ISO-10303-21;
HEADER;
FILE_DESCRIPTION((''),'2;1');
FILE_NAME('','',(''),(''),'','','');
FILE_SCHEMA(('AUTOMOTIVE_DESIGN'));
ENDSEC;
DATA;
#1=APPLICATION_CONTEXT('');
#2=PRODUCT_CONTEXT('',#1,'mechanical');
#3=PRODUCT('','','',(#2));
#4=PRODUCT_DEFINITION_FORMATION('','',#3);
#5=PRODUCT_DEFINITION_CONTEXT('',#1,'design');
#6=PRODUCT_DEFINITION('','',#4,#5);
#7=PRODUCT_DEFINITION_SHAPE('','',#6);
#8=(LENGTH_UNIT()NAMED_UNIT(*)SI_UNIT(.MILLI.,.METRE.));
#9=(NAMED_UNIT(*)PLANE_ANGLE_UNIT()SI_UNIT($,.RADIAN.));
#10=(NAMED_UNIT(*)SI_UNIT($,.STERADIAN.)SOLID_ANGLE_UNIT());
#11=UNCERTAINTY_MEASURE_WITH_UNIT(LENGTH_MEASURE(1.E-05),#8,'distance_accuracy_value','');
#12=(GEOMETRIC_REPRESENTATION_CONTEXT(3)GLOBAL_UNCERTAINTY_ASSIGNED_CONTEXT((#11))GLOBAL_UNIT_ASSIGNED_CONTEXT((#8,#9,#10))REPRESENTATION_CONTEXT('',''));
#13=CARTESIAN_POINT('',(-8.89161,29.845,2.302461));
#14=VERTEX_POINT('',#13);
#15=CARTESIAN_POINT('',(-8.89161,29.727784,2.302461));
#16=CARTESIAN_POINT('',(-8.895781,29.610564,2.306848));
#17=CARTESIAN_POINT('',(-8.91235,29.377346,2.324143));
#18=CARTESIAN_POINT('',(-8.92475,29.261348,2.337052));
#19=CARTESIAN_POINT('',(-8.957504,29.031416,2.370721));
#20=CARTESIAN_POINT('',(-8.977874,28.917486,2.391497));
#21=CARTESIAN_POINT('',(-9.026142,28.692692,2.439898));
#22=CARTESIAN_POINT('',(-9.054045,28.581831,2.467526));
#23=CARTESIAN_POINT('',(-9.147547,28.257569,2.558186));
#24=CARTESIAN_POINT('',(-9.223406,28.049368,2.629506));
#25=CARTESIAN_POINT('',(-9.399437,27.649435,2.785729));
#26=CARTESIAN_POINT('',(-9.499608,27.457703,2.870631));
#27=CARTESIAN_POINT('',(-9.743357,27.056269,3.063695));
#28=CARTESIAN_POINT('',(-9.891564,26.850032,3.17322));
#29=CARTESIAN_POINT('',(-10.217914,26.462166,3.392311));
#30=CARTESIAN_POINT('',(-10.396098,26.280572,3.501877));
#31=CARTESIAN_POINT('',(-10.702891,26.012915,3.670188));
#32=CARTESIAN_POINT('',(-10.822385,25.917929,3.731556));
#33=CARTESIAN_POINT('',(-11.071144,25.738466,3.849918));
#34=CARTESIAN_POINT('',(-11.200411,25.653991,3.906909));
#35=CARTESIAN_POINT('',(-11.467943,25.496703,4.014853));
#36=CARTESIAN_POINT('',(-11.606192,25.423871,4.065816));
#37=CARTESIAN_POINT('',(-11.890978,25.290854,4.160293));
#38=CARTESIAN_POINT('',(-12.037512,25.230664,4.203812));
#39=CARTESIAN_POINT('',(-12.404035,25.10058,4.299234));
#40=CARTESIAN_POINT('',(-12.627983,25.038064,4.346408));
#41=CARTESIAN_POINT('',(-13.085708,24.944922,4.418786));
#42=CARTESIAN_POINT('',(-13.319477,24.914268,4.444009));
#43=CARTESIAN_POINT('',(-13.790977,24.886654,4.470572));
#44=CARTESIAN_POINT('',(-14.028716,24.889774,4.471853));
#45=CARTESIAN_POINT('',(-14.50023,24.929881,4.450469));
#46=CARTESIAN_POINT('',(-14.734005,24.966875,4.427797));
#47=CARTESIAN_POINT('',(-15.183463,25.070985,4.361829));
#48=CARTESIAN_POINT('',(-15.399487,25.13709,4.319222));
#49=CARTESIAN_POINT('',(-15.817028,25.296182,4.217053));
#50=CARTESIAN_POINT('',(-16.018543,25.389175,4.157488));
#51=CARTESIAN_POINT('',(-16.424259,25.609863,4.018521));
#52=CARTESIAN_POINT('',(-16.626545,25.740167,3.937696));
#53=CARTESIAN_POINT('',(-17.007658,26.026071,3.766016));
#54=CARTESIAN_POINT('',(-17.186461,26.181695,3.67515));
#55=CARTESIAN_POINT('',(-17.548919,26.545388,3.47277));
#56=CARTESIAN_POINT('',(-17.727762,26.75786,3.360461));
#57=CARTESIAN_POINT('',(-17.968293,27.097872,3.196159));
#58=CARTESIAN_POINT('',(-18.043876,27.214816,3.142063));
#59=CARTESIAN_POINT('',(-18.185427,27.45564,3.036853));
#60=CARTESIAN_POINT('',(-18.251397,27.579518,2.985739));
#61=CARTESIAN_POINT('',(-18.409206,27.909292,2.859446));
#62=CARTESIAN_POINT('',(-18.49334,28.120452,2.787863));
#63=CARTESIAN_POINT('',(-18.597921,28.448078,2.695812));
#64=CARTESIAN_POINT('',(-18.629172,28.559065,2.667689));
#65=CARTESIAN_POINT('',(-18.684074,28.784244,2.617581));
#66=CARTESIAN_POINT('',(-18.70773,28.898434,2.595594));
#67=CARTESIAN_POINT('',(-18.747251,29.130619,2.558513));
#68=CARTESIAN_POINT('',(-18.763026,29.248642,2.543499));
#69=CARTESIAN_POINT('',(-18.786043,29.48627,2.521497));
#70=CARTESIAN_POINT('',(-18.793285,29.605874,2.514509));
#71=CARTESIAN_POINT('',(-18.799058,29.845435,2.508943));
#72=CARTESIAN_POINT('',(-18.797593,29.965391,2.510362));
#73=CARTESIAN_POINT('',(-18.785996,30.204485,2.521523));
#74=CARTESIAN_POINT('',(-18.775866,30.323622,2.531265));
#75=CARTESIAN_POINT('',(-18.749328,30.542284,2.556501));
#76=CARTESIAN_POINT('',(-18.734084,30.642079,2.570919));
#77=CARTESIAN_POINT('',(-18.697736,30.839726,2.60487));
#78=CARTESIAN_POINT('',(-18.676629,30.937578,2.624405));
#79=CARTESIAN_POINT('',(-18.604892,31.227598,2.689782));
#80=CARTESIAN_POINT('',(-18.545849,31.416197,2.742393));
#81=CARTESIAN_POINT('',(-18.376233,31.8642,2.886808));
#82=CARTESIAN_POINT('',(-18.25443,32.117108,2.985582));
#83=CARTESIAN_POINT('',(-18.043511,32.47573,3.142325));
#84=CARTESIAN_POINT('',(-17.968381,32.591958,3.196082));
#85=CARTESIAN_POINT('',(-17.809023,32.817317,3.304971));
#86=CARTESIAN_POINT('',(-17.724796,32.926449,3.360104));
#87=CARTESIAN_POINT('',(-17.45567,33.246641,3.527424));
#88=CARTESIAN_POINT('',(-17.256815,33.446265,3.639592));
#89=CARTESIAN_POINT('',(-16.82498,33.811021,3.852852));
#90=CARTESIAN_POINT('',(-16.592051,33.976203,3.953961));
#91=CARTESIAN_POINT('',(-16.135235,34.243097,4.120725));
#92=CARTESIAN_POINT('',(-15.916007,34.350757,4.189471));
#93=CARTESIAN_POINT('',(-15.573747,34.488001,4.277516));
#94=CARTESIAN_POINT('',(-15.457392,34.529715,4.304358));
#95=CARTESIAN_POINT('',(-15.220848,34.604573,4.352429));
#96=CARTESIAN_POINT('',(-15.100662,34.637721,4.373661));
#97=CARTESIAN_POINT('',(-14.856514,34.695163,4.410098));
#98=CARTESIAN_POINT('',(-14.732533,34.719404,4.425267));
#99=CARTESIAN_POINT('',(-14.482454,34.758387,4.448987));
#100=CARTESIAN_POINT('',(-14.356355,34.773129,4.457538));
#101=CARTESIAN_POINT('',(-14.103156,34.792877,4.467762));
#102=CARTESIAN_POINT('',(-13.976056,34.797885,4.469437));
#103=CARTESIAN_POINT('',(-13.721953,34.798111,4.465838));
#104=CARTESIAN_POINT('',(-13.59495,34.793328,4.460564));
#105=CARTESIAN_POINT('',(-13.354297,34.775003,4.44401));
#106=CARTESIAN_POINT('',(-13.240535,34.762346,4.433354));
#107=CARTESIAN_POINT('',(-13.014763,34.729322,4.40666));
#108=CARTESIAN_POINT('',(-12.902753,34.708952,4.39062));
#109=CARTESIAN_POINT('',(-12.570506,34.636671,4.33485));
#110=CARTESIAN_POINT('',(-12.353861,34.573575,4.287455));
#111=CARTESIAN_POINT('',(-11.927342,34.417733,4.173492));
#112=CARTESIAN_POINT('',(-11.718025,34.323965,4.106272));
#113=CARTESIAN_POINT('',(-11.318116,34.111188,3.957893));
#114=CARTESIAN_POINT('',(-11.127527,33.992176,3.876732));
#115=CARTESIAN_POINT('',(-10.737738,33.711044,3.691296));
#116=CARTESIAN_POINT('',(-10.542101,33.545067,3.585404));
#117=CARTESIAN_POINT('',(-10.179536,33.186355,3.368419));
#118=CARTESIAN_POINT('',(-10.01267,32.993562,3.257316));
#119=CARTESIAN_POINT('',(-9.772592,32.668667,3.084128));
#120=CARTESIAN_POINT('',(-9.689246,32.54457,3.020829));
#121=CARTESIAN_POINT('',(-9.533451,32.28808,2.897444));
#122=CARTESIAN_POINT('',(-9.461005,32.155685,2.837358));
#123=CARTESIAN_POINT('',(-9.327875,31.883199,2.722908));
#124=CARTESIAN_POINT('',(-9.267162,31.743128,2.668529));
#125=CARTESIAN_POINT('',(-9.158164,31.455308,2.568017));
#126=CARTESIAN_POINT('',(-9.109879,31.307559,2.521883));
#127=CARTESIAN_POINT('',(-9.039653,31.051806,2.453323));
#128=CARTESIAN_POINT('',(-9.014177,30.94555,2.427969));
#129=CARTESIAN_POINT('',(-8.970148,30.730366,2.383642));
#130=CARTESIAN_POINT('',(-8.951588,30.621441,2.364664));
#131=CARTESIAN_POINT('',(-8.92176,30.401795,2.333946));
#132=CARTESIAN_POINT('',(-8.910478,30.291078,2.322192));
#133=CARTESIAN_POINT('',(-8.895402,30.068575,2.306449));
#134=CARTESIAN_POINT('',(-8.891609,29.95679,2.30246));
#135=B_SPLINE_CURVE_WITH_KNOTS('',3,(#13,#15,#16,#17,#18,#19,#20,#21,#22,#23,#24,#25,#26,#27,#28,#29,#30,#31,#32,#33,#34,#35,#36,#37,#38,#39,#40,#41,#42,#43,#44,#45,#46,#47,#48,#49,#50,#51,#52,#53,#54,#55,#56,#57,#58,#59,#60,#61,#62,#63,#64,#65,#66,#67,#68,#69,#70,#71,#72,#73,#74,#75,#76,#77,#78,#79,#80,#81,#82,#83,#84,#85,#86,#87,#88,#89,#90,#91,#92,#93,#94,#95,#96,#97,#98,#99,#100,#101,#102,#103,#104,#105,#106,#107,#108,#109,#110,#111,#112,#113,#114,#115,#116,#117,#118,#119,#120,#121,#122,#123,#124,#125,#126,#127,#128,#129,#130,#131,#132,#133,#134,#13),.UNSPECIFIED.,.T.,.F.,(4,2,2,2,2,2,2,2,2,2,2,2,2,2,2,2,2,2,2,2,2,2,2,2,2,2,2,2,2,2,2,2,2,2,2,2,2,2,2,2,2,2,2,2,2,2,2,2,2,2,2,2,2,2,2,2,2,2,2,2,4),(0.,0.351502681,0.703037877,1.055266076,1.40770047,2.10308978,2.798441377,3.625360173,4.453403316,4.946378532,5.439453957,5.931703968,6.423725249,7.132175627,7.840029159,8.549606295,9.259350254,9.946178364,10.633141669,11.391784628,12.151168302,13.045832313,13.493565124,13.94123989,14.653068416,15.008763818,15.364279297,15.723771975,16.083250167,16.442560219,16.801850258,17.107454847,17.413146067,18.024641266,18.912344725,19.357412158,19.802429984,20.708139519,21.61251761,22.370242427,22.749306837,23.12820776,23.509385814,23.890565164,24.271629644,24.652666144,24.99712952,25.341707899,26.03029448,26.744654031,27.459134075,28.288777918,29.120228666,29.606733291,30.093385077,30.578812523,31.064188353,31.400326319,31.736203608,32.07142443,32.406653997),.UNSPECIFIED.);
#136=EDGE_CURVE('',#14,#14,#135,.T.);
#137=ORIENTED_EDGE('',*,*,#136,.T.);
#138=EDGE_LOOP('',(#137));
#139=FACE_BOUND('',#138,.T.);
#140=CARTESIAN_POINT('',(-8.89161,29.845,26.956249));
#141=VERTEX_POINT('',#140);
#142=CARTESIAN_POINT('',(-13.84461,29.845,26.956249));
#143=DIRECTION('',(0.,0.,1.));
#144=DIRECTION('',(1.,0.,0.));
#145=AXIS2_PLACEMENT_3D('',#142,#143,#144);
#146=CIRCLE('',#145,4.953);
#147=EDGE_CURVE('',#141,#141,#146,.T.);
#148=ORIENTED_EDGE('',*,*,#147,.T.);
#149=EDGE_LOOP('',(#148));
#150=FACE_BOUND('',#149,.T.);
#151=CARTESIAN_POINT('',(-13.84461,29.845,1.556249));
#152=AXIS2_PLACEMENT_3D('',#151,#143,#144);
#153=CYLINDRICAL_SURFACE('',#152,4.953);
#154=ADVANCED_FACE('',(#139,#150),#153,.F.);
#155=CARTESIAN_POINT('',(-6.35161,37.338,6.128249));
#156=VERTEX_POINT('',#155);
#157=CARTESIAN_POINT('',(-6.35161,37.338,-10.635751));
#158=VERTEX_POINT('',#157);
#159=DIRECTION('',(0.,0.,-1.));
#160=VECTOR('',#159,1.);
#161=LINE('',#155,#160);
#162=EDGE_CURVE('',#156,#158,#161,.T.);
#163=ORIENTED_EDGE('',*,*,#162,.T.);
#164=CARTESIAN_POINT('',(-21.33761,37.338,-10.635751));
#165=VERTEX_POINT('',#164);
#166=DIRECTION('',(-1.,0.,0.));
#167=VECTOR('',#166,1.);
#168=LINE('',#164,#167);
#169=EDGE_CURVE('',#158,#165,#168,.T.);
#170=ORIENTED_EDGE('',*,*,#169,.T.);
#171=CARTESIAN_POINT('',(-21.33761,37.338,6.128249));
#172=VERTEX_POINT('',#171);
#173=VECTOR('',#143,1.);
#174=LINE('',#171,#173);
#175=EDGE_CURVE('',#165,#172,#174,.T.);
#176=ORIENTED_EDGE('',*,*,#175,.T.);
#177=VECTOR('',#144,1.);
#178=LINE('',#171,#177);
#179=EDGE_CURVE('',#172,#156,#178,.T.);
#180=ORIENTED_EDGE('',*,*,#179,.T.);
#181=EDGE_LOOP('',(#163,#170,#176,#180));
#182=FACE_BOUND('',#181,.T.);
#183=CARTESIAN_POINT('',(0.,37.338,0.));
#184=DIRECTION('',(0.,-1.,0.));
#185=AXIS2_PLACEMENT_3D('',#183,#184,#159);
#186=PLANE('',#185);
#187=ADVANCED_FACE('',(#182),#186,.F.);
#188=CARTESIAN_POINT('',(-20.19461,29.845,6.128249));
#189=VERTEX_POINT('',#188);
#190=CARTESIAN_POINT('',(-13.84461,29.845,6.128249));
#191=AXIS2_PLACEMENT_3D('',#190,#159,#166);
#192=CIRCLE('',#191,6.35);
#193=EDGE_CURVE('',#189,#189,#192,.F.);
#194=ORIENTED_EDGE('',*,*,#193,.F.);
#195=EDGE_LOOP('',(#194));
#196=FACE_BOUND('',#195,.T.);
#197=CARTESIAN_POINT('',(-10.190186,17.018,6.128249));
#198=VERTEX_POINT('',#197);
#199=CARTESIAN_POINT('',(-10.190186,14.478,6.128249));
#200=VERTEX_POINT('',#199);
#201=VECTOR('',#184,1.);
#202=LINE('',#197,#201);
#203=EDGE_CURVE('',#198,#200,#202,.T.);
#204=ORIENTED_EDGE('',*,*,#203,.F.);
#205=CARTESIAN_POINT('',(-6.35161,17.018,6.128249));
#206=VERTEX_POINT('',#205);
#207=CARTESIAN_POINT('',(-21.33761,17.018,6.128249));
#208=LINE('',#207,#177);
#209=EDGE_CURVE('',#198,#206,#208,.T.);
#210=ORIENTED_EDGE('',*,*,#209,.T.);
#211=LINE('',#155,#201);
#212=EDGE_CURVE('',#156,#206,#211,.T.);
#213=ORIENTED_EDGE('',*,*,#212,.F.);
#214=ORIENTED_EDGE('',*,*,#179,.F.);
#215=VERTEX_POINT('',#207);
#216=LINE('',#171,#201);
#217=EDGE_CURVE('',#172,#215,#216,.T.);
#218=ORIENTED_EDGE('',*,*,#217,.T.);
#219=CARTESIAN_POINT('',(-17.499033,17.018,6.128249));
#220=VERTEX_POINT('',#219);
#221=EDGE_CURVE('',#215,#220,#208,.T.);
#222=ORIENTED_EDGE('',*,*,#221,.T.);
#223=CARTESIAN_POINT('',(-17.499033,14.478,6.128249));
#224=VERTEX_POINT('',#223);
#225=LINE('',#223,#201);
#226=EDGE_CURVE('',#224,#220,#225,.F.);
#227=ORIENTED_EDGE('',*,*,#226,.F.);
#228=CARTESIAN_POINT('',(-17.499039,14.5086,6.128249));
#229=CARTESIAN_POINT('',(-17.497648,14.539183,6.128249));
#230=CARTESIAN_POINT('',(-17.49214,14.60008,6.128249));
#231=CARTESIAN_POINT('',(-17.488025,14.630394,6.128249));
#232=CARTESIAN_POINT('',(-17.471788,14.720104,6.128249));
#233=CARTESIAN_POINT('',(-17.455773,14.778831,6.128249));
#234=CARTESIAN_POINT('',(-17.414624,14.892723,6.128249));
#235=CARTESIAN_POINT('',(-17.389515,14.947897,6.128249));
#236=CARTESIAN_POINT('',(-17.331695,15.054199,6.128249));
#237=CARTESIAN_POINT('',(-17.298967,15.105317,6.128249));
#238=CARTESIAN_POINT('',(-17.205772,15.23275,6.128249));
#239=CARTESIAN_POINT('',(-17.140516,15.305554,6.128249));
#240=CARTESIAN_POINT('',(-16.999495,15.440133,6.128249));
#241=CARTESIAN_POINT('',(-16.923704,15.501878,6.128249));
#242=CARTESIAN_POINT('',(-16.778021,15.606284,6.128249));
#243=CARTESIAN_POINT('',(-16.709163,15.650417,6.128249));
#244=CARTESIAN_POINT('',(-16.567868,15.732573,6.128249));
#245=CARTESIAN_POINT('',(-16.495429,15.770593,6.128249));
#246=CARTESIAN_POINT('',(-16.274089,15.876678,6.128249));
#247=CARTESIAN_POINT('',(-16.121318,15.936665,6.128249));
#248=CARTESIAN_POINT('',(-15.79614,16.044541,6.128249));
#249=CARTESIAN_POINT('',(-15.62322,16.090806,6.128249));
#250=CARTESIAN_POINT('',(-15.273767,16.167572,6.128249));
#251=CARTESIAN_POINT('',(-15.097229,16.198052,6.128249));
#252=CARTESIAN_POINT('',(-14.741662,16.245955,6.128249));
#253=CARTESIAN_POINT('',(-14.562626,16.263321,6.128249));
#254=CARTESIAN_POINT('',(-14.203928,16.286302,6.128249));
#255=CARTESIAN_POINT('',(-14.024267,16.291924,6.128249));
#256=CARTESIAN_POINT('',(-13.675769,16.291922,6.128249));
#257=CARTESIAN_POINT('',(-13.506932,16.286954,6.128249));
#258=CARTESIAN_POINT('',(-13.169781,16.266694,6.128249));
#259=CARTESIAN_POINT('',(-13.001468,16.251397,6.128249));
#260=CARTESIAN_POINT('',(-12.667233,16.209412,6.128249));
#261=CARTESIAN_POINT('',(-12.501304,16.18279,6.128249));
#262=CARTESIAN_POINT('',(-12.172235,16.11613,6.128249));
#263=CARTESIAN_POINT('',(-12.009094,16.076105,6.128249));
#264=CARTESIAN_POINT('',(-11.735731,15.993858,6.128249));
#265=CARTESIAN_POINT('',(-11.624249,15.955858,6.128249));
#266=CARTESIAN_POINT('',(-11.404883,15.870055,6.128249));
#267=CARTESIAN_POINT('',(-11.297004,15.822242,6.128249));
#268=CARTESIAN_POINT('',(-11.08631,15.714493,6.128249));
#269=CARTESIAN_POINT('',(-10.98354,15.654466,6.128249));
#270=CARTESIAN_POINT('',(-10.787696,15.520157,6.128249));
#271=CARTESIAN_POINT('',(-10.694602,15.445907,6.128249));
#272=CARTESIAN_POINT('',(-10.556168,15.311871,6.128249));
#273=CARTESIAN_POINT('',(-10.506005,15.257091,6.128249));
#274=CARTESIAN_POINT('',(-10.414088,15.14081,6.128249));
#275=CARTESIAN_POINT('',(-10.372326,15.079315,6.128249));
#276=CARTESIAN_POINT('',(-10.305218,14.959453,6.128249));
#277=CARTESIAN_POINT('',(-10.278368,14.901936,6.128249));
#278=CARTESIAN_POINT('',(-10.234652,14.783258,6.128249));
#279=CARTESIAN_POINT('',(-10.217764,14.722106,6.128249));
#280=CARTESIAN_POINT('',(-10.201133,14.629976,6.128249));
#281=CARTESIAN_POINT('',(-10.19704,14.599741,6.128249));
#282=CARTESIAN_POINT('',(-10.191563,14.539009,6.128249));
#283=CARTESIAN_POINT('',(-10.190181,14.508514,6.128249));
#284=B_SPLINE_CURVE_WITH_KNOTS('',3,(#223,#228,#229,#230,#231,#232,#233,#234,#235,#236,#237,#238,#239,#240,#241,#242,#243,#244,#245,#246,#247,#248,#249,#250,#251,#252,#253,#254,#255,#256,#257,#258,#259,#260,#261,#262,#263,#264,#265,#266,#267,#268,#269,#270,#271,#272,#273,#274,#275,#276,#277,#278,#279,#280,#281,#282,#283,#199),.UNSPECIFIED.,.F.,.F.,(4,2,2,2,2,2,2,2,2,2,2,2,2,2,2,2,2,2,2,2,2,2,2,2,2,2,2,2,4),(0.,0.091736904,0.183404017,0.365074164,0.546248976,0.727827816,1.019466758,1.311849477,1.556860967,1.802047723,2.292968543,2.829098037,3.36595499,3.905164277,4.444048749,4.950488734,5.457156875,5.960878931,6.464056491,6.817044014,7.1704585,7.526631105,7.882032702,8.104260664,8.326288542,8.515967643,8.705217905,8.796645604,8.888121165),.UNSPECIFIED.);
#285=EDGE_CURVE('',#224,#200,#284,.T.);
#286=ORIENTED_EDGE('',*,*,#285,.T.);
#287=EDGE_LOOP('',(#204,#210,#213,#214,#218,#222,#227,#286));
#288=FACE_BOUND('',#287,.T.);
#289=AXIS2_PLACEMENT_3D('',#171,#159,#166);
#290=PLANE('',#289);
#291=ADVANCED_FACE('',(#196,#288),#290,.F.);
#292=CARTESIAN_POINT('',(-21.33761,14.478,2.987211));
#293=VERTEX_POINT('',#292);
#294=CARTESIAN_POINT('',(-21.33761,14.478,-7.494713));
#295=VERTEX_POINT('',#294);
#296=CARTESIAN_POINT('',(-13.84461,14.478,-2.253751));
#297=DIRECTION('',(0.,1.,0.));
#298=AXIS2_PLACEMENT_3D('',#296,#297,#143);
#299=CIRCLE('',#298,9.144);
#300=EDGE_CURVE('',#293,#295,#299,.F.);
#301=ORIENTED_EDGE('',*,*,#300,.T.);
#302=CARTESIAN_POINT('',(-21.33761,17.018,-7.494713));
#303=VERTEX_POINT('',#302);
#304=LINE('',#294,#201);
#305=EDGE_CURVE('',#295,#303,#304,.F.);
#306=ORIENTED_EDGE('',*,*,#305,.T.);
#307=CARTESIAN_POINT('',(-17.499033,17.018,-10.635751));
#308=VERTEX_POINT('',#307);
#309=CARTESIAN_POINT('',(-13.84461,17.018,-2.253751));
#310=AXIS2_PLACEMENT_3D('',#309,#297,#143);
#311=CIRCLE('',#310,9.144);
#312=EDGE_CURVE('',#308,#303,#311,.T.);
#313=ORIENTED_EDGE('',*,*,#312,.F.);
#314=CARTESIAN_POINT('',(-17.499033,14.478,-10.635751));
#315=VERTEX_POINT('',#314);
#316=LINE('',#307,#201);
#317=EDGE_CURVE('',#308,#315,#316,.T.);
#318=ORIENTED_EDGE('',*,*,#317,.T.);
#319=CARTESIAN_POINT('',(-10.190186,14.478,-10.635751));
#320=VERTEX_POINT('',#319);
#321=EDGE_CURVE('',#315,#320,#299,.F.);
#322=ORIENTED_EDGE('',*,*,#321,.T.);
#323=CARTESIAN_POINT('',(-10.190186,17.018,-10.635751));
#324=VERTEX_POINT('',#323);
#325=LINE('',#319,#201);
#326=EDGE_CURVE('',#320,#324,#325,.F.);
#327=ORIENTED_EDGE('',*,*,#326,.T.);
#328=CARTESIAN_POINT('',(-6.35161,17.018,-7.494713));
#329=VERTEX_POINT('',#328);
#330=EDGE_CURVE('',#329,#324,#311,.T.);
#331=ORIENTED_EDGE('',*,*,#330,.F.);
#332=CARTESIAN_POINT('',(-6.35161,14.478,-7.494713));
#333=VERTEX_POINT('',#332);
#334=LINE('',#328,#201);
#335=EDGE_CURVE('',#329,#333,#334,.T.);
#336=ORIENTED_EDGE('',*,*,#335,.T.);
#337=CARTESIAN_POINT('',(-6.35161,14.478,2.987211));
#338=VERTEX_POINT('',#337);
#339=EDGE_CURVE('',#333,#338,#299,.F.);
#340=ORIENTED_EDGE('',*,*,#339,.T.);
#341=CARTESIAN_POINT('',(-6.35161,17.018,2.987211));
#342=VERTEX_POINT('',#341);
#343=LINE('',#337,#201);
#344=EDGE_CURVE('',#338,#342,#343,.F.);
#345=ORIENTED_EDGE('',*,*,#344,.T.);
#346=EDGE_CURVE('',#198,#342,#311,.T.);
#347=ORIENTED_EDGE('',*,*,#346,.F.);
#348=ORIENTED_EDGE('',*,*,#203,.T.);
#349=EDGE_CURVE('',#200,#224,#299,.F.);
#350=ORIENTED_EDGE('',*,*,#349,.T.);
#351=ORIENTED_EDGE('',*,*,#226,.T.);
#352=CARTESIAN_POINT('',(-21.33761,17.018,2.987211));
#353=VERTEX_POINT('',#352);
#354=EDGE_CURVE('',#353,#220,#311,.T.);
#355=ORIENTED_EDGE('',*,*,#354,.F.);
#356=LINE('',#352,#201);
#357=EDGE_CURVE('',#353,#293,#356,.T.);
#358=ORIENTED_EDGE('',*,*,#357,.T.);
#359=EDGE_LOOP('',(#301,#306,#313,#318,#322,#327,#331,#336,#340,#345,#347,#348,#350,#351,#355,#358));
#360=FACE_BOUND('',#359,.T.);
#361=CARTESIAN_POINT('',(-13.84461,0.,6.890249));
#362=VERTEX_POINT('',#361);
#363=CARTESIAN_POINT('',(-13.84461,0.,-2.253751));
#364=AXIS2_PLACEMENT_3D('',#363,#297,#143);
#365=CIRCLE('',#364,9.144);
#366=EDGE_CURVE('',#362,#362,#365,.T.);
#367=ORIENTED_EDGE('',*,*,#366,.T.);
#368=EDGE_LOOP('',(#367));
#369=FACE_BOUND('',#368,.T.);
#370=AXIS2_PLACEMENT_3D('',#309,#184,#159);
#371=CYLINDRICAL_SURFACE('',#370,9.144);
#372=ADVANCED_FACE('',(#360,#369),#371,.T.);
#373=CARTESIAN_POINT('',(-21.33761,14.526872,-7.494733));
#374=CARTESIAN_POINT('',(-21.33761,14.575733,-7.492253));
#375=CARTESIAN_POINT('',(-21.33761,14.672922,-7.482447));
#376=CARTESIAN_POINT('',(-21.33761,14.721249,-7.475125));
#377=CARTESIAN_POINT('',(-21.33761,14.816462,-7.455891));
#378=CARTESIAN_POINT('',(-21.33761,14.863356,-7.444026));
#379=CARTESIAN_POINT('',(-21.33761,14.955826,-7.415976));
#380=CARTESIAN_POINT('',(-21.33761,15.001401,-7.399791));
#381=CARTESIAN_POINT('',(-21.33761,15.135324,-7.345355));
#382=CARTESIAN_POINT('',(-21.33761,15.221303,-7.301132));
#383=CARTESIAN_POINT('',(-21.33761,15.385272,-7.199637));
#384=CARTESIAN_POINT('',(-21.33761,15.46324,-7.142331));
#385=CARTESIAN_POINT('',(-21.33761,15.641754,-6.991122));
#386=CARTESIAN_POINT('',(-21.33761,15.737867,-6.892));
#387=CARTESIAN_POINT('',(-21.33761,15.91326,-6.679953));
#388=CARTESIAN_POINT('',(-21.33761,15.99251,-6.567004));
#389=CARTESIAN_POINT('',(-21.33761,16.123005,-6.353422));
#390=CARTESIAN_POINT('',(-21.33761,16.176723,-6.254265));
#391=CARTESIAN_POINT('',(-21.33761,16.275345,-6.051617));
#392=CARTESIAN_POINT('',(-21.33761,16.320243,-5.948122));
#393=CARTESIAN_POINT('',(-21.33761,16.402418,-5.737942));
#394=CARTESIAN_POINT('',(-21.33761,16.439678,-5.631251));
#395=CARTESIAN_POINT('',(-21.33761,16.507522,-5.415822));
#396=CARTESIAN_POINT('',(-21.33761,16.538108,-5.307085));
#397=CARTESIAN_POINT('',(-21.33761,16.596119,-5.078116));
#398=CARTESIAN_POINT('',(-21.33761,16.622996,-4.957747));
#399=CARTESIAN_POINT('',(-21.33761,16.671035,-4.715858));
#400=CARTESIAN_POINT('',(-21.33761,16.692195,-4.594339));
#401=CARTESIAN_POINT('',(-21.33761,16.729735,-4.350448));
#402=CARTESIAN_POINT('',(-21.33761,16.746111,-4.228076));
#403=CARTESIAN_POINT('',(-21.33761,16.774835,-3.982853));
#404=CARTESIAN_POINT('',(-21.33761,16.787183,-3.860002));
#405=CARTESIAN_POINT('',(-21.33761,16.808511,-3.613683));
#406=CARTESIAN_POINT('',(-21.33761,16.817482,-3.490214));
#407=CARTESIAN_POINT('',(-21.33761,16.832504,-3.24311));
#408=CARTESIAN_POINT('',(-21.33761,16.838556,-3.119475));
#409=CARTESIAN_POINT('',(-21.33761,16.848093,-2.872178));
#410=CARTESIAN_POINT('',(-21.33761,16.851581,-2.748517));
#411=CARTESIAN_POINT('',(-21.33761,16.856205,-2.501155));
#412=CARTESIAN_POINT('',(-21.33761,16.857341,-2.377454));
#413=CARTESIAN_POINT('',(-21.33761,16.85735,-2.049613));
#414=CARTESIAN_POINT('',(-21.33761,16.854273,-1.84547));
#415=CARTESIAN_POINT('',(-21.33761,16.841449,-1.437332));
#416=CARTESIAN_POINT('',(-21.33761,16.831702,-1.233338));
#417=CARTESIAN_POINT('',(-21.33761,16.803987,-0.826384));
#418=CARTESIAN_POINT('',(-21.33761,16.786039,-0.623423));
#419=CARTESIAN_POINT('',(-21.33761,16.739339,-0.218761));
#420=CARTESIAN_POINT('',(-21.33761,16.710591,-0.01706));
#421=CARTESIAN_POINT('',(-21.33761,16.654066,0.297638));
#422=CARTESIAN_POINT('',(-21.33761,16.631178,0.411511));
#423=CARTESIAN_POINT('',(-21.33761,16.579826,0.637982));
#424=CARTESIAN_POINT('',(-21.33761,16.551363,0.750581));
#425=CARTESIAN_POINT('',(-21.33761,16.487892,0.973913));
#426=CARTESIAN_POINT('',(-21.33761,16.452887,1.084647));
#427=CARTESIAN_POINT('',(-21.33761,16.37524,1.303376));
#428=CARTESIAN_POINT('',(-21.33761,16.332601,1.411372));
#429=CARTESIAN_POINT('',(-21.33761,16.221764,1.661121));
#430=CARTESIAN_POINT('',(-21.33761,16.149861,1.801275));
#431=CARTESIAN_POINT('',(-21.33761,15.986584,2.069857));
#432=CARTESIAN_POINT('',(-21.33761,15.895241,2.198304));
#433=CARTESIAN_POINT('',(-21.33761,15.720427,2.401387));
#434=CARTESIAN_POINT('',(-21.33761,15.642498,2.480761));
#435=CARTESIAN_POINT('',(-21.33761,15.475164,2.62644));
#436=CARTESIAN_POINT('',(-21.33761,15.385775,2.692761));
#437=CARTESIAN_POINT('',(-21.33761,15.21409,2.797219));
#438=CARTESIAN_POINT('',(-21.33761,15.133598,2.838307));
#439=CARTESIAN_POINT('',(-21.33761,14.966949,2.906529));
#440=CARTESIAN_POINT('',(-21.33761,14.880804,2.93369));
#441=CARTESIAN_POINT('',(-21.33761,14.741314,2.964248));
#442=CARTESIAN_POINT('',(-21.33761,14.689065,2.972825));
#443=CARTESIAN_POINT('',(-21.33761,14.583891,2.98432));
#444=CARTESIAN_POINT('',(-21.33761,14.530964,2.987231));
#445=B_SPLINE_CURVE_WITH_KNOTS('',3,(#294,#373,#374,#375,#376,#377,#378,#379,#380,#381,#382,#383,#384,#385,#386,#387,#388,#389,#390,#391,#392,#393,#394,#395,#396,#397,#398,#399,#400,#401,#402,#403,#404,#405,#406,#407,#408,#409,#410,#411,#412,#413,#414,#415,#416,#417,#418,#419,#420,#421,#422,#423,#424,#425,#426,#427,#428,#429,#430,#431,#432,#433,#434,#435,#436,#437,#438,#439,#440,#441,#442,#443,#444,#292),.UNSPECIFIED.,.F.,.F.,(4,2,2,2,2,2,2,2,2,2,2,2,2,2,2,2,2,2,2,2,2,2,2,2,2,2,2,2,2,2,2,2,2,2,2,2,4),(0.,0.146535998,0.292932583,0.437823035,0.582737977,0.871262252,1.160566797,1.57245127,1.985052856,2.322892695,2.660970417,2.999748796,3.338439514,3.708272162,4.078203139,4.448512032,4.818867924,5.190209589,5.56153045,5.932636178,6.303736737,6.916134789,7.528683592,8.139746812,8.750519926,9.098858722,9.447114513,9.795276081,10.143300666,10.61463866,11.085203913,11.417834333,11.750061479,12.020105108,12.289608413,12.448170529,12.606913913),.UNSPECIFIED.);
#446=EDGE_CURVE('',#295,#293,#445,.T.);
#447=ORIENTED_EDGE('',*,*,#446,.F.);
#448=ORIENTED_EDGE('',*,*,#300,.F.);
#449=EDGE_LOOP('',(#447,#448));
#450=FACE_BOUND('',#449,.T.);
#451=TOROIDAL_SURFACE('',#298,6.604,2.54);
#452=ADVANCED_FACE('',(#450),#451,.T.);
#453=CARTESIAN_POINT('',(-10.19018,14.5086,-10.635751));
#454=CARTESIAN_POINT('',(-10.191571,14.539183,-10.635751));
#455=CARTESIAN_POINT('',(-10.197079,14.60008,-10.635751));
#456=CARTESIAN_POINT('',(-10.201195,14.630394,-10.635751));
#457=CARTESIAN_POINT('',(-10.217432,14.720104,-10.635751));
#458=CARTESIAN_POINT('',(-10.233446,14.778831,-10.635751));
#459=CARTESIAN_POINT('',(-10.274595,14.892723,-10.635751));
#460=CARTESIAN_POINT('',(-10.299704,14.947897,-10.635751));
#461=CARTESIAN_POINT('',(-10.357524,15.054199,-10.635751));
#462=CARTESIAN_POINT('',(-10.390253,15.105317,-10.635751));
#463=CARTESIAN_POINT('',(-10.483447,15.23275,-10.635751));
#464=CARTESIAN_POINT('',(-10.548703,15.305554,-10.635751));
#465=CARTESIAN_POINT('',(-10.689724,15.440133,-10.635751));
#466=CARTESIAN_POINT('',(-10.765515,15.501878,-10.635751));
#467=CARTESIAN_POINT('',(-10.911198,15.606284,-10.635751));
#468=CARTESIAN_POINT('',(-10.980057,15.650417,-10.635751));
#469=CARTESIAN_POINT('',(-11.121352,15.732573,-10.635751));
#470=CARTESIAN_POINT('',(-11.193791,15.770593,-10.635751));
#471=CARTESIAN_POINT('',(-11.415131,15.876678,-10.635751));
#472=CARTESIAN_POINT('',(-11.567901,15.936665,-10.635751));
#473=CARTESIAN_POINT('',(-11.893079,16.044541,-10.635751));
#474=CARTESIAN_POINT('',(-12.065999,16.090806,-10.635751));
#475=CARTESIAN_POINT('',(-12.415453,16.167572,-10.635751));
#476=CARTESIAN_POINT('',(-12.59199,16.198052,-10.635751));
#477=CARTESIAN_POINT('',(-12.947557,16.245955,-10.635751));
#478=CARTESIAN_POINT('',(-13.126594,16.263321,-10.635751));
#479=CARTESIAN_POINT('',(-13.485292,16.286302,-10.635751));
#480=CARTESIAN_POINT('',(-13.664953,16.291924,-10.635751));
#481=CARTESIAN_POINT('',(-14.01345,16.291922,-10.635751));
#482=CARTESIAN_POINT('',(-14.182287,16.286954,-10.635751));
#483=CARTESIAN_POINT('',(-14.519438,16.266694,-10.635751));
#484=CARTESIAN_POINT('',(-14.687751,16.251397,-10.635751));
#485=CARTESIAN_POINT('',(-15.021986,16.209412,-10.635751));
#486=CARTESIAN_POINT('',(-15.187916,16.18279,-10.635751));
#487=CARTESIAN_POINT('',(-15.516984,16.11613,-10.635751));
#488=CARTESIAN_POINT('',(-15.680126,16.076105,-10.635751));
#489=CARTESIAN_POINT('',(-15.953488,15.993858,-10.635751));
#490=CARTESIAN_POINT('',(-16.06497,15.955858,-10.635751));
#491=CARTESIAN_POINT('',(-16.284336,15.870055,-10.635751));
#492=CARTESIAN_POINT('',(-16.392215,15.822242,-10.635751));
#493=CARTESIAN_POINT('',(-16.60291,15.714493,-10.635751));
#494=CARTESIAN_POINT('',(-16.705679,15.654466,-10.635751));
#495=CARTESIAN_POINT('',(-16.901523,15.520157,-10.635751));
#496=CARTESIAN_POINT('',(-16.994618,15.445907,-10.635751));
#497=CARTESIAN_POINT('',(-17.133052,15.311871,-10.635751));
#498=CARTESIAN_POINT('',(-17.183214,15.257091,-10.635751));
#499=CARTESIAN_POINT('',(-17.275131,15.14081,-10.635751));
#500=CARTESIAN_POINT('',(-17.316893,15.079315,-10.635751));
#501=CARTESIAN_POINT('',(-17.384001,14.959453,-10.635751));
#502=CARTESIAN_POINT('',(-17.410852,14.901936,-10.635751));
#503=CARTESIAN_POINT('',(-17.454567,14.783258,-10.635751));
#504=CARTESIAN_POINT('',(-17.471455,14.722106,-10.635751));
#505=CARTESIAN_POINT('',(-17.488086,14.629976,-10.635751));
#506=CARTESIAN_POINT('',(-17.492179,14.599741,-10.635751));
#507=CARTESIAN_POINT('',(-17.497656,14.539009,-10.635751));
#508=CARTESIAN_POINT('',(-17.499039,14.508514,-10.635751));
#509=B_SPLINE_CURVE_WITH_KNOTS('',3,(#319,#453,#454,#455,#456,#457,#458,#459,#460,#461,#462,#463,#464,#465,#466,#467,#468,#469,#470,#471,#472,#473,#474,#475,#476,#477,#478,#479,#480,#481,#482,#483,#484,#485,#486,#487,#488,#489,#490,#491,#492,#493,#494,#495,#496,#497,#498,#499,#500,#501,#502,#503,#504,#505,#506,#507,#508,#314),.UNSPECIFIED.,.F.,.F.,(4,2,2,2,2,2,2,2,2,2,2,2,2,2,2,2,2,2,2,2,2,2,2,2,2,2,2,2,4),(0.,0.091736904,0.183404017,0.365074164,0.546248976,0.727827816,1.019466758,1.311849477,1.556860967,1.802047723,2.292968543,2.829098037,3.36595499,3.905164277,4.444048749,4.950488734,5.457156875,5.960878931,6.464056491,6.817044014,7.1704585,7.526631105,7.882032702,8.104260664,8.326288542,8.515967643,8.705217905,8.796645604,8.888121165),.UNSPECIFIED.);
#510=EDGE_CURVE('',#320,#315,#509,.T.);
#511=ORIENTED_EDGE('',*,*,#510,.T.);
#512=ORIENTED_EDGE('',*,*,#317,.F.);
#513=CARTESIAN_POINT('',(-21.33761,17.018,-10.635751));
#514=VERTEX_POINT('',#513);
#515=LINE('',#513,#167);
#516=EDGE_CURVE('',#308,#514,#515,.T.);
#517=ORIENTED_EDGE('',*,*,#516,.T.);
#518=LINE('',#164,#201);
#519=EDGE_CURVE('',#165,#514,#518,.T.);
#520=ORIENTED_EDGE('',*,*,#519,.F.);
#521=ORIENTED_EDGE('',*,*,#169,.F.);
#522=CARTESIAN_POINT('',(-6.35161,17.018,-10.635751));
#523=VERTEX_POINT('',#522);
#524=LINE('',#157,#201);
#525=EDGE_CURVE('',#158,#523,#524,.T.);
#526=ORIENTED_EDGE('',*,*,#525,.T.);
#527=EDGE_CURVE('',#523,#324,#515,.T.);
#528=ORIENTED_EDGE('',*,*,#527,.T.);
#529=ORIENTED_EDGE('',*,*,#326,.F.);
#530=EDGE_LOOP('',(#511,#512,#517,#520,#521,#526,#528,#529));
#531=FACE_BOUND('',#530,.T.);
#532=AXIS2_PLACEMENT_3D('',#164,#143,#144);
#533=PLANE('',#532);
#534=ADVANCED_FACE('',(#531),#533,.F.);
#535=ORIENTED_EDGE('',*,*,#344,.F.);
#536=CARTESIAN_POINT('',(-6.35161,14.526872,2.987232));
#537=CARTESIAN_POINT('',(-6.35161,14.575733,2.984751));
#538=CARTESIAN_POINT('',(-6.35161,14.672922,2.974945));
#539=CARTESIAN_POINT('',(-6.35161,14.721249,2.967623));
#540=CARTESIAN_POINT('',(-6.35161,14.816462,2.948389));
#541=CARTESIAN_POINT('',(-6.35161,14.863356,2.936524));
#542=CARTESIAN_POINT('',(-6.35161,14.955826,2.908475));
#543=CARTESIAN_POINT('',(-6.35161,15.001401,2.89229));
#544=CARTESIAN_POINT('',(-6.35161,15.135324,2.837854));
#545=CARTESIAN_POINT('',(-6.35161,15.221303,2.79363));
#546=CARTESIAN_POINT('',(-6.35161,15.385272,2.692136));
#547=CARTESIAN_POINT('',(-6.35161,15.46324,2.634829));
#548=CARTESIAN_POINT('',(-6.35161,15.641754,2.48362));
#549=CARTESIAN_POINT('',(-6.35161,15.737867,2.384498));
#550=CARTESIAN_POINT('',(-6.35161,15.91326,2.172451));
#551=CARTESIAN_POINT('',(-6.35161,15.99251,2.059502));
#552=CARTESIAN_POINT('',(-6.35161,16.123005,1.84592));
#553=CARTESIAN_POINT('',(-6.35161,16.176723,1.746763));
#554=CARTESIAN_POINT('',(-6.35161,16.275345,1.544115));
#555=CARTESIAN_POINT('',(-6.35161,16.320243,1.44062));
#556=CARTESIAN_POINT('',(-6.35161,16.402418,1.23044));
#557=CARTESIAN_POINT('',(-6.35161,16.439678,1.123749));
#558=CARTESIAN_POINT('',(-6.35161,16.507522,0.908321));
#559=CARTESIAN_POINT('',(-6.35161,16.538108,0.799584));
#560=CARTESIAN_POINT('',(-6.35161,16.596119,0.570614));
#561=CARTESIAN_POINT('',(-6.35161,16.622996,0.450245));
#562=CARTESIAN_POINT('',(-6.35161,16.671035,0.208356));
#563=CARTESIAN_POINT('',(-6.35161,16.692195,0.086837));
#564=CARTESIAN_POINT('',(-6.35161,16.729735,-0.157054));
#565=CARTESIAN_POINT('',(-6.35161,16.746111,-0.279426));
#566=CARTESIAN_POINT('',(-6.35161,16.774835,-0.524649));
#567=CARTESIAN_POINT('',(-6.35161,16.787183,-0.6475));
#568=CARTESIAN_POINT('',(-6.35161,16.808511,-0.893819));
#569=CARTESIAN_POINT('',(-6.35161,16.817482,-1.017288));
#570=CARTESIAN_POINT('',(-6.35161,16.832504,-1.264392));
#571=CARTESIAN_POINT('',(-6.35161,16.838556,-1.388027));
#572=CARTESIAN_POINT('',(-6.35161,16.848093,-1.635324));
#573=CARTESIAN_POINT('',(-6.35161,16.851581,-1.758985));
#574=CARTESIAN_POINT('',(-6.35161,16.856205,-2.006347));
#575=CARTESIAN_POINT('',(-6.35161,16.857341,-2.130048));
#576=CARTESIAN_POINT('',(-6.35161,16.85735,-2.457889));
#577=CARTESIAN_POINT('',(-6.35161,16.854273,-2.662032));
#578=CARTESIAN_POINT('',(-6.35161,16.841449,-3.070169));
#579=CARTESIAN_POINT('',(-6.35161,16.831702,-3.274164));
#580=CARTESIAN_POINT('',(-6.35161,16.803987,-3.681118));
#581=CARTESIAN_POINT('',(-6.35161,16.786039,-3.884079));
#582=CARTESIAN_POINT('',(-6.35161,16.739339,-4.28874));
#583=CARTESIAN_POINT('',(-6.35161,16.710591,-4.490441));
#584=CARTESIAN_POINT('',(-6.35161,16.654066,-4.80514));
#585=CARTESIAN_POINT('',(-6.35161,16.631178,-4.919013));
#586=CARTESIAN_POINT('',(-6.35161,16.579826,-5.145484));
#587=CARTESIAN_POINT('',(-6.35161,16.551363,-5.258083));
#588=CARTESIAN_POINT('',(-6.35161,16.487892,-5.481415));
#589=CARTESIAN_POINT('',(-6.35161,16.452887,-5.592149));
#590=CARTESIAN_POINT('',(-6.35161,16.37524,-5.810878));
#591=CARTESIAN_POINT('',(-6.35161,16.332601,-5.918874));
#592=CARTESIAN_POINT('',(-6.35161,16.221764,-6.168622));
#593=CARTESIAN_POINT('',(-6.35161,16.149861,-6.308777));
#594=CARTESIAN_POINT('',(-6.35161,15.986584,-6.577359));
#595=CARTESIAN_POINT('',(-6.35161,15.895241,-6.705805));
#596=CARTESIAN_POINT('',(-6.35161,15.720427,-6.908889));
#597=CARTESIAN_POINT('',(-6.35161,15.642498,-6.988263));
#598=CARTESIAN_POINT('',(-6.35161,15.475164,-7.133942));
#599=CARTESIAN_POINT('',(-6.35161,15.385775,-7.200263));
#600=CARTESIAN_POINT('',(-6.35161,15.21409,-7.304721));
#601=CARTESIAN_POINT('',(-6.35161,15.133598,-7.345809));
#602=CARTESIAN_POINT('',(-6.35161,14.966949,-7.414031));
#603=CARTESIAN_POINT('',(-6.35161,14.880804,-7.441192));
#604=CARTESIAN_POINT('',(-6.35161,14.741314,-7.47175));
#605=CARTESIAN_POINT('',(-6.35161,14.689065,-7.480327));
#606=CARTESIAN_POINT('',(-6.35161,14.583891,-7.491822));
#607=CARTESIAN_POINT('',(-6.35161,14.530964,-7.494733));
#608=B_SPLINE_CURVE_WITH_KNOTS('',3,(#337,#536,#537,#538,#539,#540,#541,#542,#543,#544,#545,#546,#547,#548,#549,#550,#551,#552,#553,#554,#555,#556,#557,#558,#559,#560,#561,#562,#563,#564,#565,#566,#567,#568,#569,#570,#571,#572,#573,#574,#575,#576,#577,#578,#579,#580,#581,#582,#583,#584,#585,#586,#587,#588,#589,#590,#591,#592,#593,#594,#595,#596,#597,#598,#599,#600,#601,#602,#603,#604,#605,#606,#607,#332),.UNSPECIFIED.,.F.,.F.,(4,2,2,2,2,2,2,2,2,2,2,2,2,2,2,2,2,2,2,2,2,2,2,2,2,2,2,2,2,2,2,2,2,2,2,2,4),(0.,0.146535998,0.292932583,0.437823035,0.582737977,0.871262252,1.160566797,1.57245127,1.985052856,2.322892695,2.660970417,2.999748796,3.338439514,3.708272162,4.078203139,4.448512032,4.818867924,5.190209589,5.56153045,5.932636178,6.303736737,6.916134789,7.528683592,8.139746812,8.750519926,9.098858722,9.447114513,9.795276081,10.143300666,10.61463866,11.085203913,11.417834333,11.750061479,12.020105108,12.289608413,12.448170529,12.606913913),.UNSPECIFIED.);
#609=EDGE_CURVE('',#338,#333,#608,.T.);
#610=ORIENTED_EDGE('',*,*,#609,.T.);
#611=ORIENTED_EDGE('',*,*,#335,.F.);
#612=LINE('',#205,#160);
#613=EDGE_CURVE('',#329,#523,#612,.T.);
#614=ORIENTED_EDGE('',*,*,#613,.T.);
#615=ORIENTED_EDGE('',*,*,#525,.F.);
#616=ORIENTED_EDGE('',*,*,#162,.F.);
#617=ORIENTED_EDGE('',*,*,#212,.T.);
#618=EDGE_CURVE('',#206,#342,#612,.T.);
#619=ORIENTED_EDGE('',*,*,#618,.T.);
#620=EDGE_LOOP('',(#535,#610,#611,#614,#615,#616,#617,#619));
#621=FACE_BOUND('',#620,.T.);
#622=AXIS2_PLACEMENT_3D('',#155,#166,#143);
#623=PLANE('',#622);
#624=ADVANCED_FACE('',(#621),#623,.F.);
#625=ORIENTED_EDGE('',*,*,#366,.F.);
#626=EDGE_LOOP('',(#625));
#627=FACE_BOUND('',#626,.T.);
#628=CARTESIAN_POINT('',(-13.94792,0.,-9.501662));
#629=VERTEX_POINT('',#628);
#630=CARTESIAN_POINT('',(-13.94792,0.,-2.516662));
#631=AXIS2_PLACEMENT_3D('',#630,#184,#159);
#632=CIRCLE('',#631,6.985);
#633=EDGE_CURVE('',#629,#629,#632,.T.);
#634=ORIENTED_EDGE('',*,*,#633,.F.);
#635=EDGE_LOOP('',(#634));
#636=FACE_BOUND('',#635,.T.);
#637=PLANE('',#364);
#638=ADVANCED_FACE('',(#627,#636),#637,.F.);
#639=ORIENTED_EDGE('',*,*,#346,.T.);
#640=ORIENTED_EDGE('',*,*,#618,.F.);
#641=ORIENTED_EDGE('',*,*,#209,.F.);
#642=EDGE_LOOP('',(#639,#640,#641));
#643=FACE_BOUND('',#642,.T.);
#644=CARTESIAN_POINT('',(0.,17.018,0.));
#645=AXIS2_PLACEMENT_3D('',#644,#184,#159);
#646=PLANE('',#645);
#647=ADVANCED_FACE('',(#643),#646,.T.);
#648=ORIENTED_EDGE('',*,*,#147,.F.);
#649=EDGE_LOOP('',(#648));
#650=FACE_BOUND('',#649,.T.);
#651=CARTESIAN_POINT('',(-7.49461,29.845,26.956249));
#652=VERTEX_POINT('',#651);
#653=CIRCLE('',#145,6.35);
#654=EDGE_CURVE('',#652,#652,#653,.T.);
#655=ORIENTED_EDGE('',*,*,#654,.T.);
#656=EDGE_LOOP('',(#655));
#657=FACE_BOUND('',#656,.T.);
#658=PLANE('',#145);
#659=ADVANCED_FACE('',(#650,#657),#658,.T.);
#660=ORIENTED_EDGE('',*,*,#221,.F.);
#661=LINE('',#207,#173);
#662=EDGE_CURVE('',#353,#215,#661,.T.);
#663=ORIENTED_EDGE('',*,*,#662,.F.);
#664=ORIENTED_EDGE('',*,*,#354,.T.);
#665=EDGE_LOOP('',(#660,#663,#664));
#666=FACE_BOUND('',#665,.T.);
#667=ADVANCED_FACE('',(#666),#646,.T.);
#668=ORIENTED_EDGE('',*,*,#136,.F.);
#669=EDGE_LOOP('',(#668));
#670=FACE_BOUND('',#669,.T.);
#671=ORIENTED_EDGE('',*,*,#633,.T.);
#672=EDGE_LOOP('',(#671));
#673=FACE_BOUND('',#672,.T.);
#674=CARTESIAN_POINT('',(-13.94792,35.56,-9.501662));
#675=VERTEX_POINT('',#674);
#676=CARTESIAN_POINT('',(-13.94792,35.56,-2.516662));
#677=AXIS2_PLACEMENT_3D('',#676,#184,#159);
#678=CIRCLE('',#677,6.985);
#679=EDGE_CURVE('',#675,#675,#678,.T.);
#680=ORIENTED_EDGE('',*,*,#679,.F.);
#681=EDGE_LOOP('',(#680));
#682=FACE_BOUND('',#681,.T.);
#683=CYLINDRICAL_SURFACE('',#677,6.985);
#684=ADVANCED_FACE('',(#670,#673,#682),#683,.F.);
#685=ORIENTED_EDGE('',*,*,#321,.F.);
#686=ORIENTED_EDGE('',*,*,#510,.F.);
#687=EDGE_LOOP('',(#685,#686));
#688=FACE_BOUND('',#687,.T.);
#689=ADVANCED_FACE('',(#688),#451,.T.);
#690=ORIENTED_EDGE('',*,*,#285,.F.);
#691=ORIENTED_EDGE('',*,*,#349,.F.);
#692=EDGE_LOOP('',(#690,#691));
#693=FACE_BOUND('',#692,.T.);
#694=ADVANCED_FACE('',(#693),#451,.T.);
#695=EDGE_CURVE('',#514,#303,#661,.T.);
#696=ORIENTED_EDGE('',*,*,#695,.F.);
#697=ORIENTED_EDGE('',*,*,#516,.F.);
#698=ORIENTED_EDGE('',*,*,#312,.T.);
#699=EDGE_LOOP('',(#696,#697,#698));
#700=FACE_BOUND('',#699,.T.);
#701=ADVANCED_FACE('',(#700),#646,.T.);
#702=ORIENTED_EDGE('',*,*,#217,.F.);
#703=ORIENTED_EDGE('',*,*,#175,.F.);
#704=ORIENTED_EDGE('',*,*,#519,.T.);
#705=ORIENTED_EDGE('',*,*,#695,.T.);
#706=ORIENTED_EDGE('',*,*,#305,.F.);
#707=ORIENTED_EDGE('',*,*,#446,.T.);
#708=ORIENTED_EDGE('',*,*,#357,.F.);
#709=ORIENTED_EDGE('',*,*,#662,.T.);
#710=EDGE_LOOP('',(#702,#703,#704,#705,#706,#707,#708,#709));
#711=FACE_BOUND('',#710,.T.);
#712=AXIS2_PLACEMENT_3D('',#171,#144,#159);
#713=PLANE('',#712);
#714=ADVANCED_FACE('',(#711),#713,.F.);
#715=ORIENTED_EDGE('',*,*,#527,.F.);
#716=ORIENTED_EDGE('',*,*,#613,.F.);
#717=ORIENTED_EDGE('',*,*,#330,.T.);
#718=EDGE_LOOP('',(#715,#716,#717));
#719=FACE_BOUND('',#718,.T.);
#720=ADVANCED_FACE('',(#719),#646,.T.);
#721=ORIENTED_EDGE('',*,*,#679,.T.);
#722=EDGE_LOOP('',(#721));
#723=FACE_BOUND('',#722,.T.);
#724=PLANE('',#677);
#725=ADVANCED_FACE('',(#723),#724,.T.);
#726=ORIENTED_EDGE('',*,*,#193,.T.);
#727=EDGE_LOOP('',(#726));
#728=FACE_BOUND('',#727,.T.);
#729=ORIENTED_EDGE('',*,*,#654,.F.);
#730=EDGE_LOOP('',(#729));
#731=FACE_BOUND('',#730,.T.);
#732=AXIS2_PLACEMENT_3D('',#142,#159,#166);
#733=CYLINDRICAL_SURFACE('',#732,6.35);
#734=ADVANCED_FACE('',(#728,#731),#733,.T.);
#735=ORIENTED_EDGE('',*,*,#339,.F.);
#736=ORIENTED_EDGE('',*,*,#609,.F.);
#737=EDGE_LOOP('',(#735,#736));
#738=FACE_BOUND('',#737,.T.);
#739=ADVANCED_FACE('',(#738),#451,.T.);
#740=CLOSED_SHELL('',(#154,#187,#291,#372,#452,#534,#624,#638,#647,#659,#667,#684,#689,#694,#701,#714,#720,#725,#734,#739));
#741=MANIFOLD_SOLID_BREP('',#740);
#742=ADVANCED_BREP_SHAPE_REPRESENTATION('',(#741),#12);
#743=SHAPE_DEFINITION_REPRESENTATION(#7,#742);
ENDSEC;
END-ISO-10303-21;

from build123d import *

# Parameters (mm, degrees)
SKETCH1_R           = 9.144
BOSS_EXTRUDE1_DEPTH = 17.018
SKETCH2_W           = 14.986
SKETCH2_H           = 16.764
BOSS_EXTRUDE2_DEPTH = 20.32
SKETCH3_R           = 6.35
BOSS_EXTRUDE3_DEPTH = 20.828
SKETCH5_R           = 4.953
CUT_EXTRUDE1_DEPTH  = 25.4
SKETCH6_R           = 6.985
CUT_EXTRUDE2_DEPTH  = 35.56
FILLET3_R           = 2.54


with BuildPart() as part:
    # Sketch1 → Boss-Extrude1 (new body)
    with BuildSketch(Plane(origin=(0, 0, 0), x_dir=(1, 0, 0), z_dir=(0, 1, 0))):
        with Locations(Location((-13.844609685, 2.253750912, 0), (0, 0, 270))):
            Circle(SKETCH1_R)
    extrude(amount=BOSS_EXTRUDE1_DEPTH)

    # Sketch2 → Boss-Extrude2 (add)
    with BuildSketch(Plane(origin=(0, 17.018, 0), x_dir=(1, 0, 0), z_dir=(0, 1, 0))):
        with Locations((-13.844609685, 2.253750912)):
            Rectangle(SKETCH2_W, SKETCH2_H)
    extrude(amount=BOSS_EXTRUDE2_DEPTH)

    # Sketch3 → Boss-Extrude3 (add)
    with BuildSketch(Plane.XY.offset(6.128249088)):
        with Locations(Location((-13.844609685, 29.845, 0), (0, 0, 180))):
            Circle(SKETCH3_R)
    extrude(amount=BOSS_EXTRUDE3_DEPTH)

    # Sketch5 → Cut-Extrude1 (cut)
    with BuildSketch(Plane.XY.offset(26.956249088)):
        with Locations((-13.844609685, 29.845)):
            Circle(SKETCH5_R)
    extrude(amount=-CUT_EXTRUDE1_DEPTH, mode=Mode.SUBTRACT)

    # Sketch6 → Cut-Extrude2 (cut)
    with BuildSketch(Plane.XZ):
        with Locations(Location((-13.947920493, -2.516662253, 0), (0, 0, 270))):
            Circle(SKETCH6_R)
    extrude(amount=-CUT_EXTRUDE2_DEPTH, mode=Mode.SUBTRACT)

    # Fillet3
    # the kernel refuses this fillet: 2.54 mm, written as the material it takes off along each edge
    with BuildSketch(Plane(origin=(-13.844609685, 17.018, -2.253750912), x_dir=(-0.2627084277127984, 0, -0.9648752675909303), z_dir=(0.9648752675909303, 0, -0.2627084277127984))) as fillet3_piece_1_section:
        with BuildLine():
            CenterArc((9.144 - FILLET3_R, -FILLET3_R), FILLET3_R, 0, 90)
            Line((9.144 - FILLET3_R, 0), (9.144, 0))
            Line((9.144, 0), (9.144, -FILLET3_R))
        make_face()
    fillet3_piece_1 = revolve(axis=Axis((-13.844609685, 17.018, -2.253750912), (0, 1, 0)), revolution_arc=149.538336895, mode=Mode.PRIVATE)
    fillet3_piece_1 = split(fillet3_piece_1, bisect_by=Plane(origin=(-16.671949394, 16.123690595, -10.635750912), z_dir=(0, 0, -1)), keep=Keep.TOP, mode=Mode.PRIVATE)
    add(fillet3_piece_1, mode=Mode.SUBTRACT)
    with BuildSketch(Plane(origin=(-13.844609685, 17.018, -2.253750912), x_dir=(-0.2627084277127984, 0, -0.9648752675909303), z_dir=(0.9648752675909303, 0, -0.2627084277127984))) as fillet3_piece_2_section:
        with BuildLine():
            CenterArc((9.144 - FILLET3_R, -FILLET3_R), FILLET3_R, 0, 90)
            Line((9.144 - FILLET3_R, 0), (9.144, 0))
            Line((9.144, 0), (9.144, -FILLET3_R))
        make_face()
    fillet3_piece_2 = revolve(axis=Axis((-13.844609685, 17.018, -2.253750912), (0, 1, 0)), revolution_arc=149.538336895, mode=Mode.PRIVATE)
    fillet3_piece_2 = split(fillet3_piece_2, bisect_by=Plane(origin=(-16.671949372, 16.123690833, 6.128249088), z_dir=(0, 0, 1)), keep=Keep.TOP, mode=Mode.PRIVATE)
    add(fillet3_piece_2, mode=Mode.SUBTRACT)
    with BuildSketch(Plane(origin=(-13.844609685, 17.018, -2.253750912), x_dir=(-0.2627084277127984, 0, -0.9648752675909303), z_dir=(0.9648752675909303, 0, -0.2627084277127984))) as fillet3_piece_3_section:
        with BuildLine():
            CenterArc((9.144 - FILLET3_R, -FILLET3_R), FILLET3_R, 0, 90)
            Line((9.144 - FILLET3_R, 0), (9.144, 0))
            Line((9.144, 0), (9.144, -FILLET3_R))
        make_face()
    fillet3_piece_3 = revolve(axis=Axis((-13.844609685, 17.018, -2.253750912), (0, 1, 0)), revolution_arc=149.538336895, mode=Mode.PRIVATE)
    fillet3_piece_3 = split(fillet3_piece_3, bisect_by=Plane(origin=(-21.337609685, 16.368354177, -2.253748905), z_dir=(-1, 0, 0)), keep=Keep.TOP, mode=Mode.PRIVATE)
    add(fillet3_piece_3, mode=Mode.SUBTRACT)
    with BuildSketch(Plane(origin=(-13.844609685, 17.018, -2.253750912), x_dir=(-0.8937341447307489, 0, 0.4485970112945439), z_dir=(-0.4485970112945439, 0, -0.8937341447307489))) as fillet3_piece_4_section:
        with BuildLine():
            CenterArc((9.144 - FILLET3_R, -FILLET3_R), FILLET3_R, 0, 90)
            Line((9.144 - FILLET3_R, 0), (9.144, 0))
            Line((9.144, 0), (9.144, -FILLET3_R))
        make_face()
    fillet3_piece_4 = revolve(axis=Axis((-13.844609685, 17.018, -2.253750912), (0, 1, 0)), revolution_arc=63.346294775, mode=Mode.PRIVATE)
    fillet3_piece_4 = split(fillet3_piece_4, bisect_by=Plane(origin=(-21.337609685, 16.206370087, 2.181832168), z_dir=(-1, 0, 0)), keep=Keep.TOP, mode=Mode.PRIVATE)
    add(fillet3_piece_4, mode=Mode.SUBTRACT)
    with BuildSketch(Plane(origin=(-13.844609685, 17.018, -2.253750912), x_dir=(-0.8937341447307489, 0, 0.4485970112945439), z_dir=(-0.4485970112945439, 0, -0.8937341447307489))) as fillet3_piece_5_section:
        with BuildLine():
            CenterArc((9.144 - FILLET3_R, -FILLET3_R), FILLET3_R, 0, 90)
            Line((9.144 - FILLET3_R, 0), (9.144, 0))
            Line((9.144, 0), (9.144, -FILLET3_R))
        make_face()
    fillet3_piece_5 = revolve(axis=Axis((-13.844609685, 17.018, -2.253750912), (0, 1, 0)), revolution_arc=63.346294775, mode=Mode.PRIVATE)
    fillet3_piece_5 = split(fillet3_piece_5, bisect_by=Plane(origin=(-15.321370262, 16.241743505, 6.128249088), z_dir=(0, 0, 1)), keep=Keep.TOP, mode=Mode.PRIVATE)
    add(fillet3_piece_5, mode=Mode.SUBTRACT)
    with BuildSketch(Plane(origin=(-13.844609685, 17.018, -2.253750912), x_dir=(0.8937598579171911, 0, -0.4485457795764468), z_dir=(0.4485457795764468, 0, 0.8937598579171911))) as fillet3_piece_6_section:
        with BuildLine():
            CenterArc((9.144 - FILLET3_R, -FILLET3_R), FILLET3_R, 0, 90)
            Line((9.144 - FILLET3_R, 0), (9.144, 0))
            Line((9.144, 0), (9.144, -FILLET3_R))
        make_face()
    fillet3_piece_6 = revolve(axis=Axis((-13.844609685, 17.018, -2.253750912), (0, 1, 0)), revolution_arc=126.699158212, mode=Mode.PRIVATE)
    fillet3_piece_6 = split(fillet3_piece_6, bisect_by=Plane(origin=(-6.351609685, 16.206428058, -6.689039599), z_dir=(1, 0, 0)), keep=Keep.TOP, mode=Mode.PRIVATE)
    add(fillet3_piece_6, mode=Mode.SUBTRACT)
    with BuildSketch(Plane(origin=(-13.844609685, 17.018, -2.253750912), x_dir=(0.8937598579171911, 0, -0.4485457795764468), z_dir=(0.4485457795764468, 0, 0.8937598579171911))) as fillet3_piece_7_section:
        with BuildLine():
            CenterArc((9.144 - FILLET3_R, -FILLET3_R), FILLET3_R, 0, 90)
            Line((9.144 - FILLET3_R, 0), (9.144, 0))
            Line((9.144, 0), (9.144, -FILLET3_R))
        make_face()
    fillet3_piece_7 = revolve(axis=Axis((-13.844609685, 17.018, -2.253750912), (0, 1, 0)), revolution_arc=126.699158212, mode=Mode.PRIVATE)
    fillet3_piece_7 = split(fillet3_piece_7, bisect_by=Plane(origin=(-21.337609685, 16.206428241, -6.68903958), z_dir=(-1, 0, 0)), keep=Keep.TOP, mode=Mode.PRIVATE)
    add(fillet3_piece_7, mode=Mode.SUBTRACT)
    with BuildSketch(Plane(origin=(-13.844609685, 17.018, -2.253750912), x_dir=(0.8937598579171911, 0, -0.4485457795764468), z_dir=(0.4485457795764468, 0, 0.8937598579171911))) as fillet3_piece_8_section:
        with BuildLine():
            CenterArc((9.144 - FILLET3_R, -FILLET3_R), FILLET3_R, 0, 90)
            Line((9.144 - FILLET3_R, 0), (9.144, 0))
            Line((9.144, 0), (9.144, -FILLET3_R))
        make_face()
    fillet3_piece_8 = revolve(axis=Axis((-13.844609685, 17.018, -2.253750912), (0, 1, 0)), revolution_arc=126.699158212, mode=Mode.PRIVATE)
    fillet3_piece_8 = split(fillet3_piece_8, bisect_by=Plane(origin=(-13.844610271, 16.241742489, -10.635750912), z_dir=(0, 0, -1)), keep=Keep.TOP, mode=Mode.PRIVATE)
    add(fillet3_piece_8, mode=Mode.SUBTRACT)
    with BuildSketch(Plane(origin=(-13.844609685, 17.018, -2.253750912), x_dir=(0.26270842771276587, 0, 0.9648752675909392), z_dir=(-0.9648752675909392, 0, 0.26270842771276587))) as fillet3_piece_9_section:
        with BuildLine():
            CenterArc((9.144 - FILLET3_R, -FILLET3_R), FILLET3_R, 0, 90)
            Line((9.144 - FILLET3_R, 0), (9.144, 0))
            Line((9.144, 0), (9.144, -FILLET3_R))
        make_face()
    fillet3_piece_9 = revolve(axis=Axis((-13.844609685, 17.018, -2.253750912), (0, 1, 0)), revolution_arc=149.538336895, mode=Mode.PRIVATE)
    fillet3_piece_9 = split(fillet3_piece_9, bisect_by=Plane(origin=(-11.017269976, 16.123690595, 6.128249088), z_dir=(0, 0, 1)), keep=Keep.TOP, mode=Mode.PRIVATE)
    add(fillet3_piece_9, mode=Mode.SUBTRACT)
    with BuildSketch(Plane(origin=(-13.844609685, 17.018, -2.253750912), x_dir=(0.26270842771276587, 0, 0.9648752675909392), z_dir=(-0.9648752675909392, 0, 0.26270842771276587))) as fillet3_piece_10_section:
        with BuildLine():
            CenterArc((9.144 - FILLET3_R, -FILLET3_R), FILLET3_R, 0, 90)
            Line((9.144 - FILLET3_R, 0), (9.144, 0))
            Line((9.144, 0), (9.144, -FILLET3_R))
        make_face()
    fillet3_piece_10 = revolve(axis=Axis((-13.844609685, 17.018, -2.253750912), (0, 1, 0)), revolution_arc=149.538336895, mode=Mode.PRIVATE)
    fillet3_piece_10 = split(fillet3_piece_10, bisect_by=Plane(origin=(-11.017269998, 16.123690833, -10.635750912), z_dir=(0, 0, -1)), keep=Keep.TOP, mode=Mode.PRIVATE)
    add(fillet3_piece_10, mode=Mode.SUBTRACT)
    with BuildSketch(Plane(origin=(-13.844609685, 17.018, -2.253750912), x_dir=(0.26270842771276587, 0, 0.9648752675909392), z_dir=(-0.9648752675909392, 0, 0.26270842771276587))) as fillet3_piece_11_section:
        with BuildLine():
            CenterArc((9.144 - FILLET3_R, -FILLET3_R), FILLET3_R, 0, 90)
            Line((9.144 - FILLET3_R, 0), (9.144, 0))
            Line((9.144, 0), (9.144, -FILLET3_R))
        make_face()
    fillet3_piece_11 = revolve(axis=Axis((-13.844609685, 17.018, -2.253750912), (0, 1, 0)), revolution_arc=149.538336895, mode=Mode.PRIVATE)
    fillet3_piece_11 = split(fillet3_piece_11, bisect_by=Plane(origin=(-6.351609685, 16.368354177, -2.253752919), z_dir=(1, 0, 0)), keep=Keep.TOP, mode=Mode.PRIVATE)
    add(fillet3_piece_11, mode=Mode.SUBTRACT)
    with BuildSketch(Plane(origin=(-13.844609685, 17.018, -2.253750912), x_dir=(0, 0, 1), z_dir=(-1, 0, 0))) as fillet3_piece_12_section:
        with BuildLine():
            CenterArc((9.144 - FILLET3_R, -FILLET3_R), FILLET3_R, 0, 90)
            Line((9.144 - FILLET3_R, 0), (9.144, 0))
            Line((9.144, 0), (9.144, -FILLET3_R))
        make_face()
    fillet3_piece_12 = revolve(axis=Axis((-13.844609685, 17.018, -2.253750912), (0, 1, 0)), revolution_arc=63.346294775, mode=Mode.PRIVATE)
    fillet3_piece_12 = split(fillet3_piece_12, bisect_by=Plane(origin=(-12.367849263, 16.241743644, 6.128249088), z_dir=(0, 0, 1)), keep=Keep.TOP, mode=Mode.PRIVATE)
    add(fillet3_piece_12, mode=Mode.SUBTRACT)
    with BuildSketch(Plane(origin=(-13.844609685, 17.018, -2.253750912), x_dir=(0, 0, 1), z_dir=(-1, 0, 0))) as fillet3_piece_13_section:
        with BuildLine():
            CenterArc((9.144 - FILLET3_R, -FILLET3_R), FILLET3_R, 0, 90)
            Line((9.144 - FILLET3_R, 0), (9.144, 0))
            Line((9.144, 0), (9.144, -FILLET3_R))
        make_face()
    fillet3_piece_13 = revolve(axis=Axis((-13.844609685, 17.018, -2.253750912), (0, 1, 0)), revolution_arc=63.346294775, mode=Mode.PRIVATE)
    fillet3_piece_13 = split(fillet3_piece_13, bisect_by=Plane(origin=(-6.351609685, 16.20637027, 2.181832149), z_dir=(1, 0, 0)), keep=Keep.TOP, mode=Mode.PRIVATE)
    add(fillet3_piece_13, mode=Mode.SUBTRACT)


solid = part.part
